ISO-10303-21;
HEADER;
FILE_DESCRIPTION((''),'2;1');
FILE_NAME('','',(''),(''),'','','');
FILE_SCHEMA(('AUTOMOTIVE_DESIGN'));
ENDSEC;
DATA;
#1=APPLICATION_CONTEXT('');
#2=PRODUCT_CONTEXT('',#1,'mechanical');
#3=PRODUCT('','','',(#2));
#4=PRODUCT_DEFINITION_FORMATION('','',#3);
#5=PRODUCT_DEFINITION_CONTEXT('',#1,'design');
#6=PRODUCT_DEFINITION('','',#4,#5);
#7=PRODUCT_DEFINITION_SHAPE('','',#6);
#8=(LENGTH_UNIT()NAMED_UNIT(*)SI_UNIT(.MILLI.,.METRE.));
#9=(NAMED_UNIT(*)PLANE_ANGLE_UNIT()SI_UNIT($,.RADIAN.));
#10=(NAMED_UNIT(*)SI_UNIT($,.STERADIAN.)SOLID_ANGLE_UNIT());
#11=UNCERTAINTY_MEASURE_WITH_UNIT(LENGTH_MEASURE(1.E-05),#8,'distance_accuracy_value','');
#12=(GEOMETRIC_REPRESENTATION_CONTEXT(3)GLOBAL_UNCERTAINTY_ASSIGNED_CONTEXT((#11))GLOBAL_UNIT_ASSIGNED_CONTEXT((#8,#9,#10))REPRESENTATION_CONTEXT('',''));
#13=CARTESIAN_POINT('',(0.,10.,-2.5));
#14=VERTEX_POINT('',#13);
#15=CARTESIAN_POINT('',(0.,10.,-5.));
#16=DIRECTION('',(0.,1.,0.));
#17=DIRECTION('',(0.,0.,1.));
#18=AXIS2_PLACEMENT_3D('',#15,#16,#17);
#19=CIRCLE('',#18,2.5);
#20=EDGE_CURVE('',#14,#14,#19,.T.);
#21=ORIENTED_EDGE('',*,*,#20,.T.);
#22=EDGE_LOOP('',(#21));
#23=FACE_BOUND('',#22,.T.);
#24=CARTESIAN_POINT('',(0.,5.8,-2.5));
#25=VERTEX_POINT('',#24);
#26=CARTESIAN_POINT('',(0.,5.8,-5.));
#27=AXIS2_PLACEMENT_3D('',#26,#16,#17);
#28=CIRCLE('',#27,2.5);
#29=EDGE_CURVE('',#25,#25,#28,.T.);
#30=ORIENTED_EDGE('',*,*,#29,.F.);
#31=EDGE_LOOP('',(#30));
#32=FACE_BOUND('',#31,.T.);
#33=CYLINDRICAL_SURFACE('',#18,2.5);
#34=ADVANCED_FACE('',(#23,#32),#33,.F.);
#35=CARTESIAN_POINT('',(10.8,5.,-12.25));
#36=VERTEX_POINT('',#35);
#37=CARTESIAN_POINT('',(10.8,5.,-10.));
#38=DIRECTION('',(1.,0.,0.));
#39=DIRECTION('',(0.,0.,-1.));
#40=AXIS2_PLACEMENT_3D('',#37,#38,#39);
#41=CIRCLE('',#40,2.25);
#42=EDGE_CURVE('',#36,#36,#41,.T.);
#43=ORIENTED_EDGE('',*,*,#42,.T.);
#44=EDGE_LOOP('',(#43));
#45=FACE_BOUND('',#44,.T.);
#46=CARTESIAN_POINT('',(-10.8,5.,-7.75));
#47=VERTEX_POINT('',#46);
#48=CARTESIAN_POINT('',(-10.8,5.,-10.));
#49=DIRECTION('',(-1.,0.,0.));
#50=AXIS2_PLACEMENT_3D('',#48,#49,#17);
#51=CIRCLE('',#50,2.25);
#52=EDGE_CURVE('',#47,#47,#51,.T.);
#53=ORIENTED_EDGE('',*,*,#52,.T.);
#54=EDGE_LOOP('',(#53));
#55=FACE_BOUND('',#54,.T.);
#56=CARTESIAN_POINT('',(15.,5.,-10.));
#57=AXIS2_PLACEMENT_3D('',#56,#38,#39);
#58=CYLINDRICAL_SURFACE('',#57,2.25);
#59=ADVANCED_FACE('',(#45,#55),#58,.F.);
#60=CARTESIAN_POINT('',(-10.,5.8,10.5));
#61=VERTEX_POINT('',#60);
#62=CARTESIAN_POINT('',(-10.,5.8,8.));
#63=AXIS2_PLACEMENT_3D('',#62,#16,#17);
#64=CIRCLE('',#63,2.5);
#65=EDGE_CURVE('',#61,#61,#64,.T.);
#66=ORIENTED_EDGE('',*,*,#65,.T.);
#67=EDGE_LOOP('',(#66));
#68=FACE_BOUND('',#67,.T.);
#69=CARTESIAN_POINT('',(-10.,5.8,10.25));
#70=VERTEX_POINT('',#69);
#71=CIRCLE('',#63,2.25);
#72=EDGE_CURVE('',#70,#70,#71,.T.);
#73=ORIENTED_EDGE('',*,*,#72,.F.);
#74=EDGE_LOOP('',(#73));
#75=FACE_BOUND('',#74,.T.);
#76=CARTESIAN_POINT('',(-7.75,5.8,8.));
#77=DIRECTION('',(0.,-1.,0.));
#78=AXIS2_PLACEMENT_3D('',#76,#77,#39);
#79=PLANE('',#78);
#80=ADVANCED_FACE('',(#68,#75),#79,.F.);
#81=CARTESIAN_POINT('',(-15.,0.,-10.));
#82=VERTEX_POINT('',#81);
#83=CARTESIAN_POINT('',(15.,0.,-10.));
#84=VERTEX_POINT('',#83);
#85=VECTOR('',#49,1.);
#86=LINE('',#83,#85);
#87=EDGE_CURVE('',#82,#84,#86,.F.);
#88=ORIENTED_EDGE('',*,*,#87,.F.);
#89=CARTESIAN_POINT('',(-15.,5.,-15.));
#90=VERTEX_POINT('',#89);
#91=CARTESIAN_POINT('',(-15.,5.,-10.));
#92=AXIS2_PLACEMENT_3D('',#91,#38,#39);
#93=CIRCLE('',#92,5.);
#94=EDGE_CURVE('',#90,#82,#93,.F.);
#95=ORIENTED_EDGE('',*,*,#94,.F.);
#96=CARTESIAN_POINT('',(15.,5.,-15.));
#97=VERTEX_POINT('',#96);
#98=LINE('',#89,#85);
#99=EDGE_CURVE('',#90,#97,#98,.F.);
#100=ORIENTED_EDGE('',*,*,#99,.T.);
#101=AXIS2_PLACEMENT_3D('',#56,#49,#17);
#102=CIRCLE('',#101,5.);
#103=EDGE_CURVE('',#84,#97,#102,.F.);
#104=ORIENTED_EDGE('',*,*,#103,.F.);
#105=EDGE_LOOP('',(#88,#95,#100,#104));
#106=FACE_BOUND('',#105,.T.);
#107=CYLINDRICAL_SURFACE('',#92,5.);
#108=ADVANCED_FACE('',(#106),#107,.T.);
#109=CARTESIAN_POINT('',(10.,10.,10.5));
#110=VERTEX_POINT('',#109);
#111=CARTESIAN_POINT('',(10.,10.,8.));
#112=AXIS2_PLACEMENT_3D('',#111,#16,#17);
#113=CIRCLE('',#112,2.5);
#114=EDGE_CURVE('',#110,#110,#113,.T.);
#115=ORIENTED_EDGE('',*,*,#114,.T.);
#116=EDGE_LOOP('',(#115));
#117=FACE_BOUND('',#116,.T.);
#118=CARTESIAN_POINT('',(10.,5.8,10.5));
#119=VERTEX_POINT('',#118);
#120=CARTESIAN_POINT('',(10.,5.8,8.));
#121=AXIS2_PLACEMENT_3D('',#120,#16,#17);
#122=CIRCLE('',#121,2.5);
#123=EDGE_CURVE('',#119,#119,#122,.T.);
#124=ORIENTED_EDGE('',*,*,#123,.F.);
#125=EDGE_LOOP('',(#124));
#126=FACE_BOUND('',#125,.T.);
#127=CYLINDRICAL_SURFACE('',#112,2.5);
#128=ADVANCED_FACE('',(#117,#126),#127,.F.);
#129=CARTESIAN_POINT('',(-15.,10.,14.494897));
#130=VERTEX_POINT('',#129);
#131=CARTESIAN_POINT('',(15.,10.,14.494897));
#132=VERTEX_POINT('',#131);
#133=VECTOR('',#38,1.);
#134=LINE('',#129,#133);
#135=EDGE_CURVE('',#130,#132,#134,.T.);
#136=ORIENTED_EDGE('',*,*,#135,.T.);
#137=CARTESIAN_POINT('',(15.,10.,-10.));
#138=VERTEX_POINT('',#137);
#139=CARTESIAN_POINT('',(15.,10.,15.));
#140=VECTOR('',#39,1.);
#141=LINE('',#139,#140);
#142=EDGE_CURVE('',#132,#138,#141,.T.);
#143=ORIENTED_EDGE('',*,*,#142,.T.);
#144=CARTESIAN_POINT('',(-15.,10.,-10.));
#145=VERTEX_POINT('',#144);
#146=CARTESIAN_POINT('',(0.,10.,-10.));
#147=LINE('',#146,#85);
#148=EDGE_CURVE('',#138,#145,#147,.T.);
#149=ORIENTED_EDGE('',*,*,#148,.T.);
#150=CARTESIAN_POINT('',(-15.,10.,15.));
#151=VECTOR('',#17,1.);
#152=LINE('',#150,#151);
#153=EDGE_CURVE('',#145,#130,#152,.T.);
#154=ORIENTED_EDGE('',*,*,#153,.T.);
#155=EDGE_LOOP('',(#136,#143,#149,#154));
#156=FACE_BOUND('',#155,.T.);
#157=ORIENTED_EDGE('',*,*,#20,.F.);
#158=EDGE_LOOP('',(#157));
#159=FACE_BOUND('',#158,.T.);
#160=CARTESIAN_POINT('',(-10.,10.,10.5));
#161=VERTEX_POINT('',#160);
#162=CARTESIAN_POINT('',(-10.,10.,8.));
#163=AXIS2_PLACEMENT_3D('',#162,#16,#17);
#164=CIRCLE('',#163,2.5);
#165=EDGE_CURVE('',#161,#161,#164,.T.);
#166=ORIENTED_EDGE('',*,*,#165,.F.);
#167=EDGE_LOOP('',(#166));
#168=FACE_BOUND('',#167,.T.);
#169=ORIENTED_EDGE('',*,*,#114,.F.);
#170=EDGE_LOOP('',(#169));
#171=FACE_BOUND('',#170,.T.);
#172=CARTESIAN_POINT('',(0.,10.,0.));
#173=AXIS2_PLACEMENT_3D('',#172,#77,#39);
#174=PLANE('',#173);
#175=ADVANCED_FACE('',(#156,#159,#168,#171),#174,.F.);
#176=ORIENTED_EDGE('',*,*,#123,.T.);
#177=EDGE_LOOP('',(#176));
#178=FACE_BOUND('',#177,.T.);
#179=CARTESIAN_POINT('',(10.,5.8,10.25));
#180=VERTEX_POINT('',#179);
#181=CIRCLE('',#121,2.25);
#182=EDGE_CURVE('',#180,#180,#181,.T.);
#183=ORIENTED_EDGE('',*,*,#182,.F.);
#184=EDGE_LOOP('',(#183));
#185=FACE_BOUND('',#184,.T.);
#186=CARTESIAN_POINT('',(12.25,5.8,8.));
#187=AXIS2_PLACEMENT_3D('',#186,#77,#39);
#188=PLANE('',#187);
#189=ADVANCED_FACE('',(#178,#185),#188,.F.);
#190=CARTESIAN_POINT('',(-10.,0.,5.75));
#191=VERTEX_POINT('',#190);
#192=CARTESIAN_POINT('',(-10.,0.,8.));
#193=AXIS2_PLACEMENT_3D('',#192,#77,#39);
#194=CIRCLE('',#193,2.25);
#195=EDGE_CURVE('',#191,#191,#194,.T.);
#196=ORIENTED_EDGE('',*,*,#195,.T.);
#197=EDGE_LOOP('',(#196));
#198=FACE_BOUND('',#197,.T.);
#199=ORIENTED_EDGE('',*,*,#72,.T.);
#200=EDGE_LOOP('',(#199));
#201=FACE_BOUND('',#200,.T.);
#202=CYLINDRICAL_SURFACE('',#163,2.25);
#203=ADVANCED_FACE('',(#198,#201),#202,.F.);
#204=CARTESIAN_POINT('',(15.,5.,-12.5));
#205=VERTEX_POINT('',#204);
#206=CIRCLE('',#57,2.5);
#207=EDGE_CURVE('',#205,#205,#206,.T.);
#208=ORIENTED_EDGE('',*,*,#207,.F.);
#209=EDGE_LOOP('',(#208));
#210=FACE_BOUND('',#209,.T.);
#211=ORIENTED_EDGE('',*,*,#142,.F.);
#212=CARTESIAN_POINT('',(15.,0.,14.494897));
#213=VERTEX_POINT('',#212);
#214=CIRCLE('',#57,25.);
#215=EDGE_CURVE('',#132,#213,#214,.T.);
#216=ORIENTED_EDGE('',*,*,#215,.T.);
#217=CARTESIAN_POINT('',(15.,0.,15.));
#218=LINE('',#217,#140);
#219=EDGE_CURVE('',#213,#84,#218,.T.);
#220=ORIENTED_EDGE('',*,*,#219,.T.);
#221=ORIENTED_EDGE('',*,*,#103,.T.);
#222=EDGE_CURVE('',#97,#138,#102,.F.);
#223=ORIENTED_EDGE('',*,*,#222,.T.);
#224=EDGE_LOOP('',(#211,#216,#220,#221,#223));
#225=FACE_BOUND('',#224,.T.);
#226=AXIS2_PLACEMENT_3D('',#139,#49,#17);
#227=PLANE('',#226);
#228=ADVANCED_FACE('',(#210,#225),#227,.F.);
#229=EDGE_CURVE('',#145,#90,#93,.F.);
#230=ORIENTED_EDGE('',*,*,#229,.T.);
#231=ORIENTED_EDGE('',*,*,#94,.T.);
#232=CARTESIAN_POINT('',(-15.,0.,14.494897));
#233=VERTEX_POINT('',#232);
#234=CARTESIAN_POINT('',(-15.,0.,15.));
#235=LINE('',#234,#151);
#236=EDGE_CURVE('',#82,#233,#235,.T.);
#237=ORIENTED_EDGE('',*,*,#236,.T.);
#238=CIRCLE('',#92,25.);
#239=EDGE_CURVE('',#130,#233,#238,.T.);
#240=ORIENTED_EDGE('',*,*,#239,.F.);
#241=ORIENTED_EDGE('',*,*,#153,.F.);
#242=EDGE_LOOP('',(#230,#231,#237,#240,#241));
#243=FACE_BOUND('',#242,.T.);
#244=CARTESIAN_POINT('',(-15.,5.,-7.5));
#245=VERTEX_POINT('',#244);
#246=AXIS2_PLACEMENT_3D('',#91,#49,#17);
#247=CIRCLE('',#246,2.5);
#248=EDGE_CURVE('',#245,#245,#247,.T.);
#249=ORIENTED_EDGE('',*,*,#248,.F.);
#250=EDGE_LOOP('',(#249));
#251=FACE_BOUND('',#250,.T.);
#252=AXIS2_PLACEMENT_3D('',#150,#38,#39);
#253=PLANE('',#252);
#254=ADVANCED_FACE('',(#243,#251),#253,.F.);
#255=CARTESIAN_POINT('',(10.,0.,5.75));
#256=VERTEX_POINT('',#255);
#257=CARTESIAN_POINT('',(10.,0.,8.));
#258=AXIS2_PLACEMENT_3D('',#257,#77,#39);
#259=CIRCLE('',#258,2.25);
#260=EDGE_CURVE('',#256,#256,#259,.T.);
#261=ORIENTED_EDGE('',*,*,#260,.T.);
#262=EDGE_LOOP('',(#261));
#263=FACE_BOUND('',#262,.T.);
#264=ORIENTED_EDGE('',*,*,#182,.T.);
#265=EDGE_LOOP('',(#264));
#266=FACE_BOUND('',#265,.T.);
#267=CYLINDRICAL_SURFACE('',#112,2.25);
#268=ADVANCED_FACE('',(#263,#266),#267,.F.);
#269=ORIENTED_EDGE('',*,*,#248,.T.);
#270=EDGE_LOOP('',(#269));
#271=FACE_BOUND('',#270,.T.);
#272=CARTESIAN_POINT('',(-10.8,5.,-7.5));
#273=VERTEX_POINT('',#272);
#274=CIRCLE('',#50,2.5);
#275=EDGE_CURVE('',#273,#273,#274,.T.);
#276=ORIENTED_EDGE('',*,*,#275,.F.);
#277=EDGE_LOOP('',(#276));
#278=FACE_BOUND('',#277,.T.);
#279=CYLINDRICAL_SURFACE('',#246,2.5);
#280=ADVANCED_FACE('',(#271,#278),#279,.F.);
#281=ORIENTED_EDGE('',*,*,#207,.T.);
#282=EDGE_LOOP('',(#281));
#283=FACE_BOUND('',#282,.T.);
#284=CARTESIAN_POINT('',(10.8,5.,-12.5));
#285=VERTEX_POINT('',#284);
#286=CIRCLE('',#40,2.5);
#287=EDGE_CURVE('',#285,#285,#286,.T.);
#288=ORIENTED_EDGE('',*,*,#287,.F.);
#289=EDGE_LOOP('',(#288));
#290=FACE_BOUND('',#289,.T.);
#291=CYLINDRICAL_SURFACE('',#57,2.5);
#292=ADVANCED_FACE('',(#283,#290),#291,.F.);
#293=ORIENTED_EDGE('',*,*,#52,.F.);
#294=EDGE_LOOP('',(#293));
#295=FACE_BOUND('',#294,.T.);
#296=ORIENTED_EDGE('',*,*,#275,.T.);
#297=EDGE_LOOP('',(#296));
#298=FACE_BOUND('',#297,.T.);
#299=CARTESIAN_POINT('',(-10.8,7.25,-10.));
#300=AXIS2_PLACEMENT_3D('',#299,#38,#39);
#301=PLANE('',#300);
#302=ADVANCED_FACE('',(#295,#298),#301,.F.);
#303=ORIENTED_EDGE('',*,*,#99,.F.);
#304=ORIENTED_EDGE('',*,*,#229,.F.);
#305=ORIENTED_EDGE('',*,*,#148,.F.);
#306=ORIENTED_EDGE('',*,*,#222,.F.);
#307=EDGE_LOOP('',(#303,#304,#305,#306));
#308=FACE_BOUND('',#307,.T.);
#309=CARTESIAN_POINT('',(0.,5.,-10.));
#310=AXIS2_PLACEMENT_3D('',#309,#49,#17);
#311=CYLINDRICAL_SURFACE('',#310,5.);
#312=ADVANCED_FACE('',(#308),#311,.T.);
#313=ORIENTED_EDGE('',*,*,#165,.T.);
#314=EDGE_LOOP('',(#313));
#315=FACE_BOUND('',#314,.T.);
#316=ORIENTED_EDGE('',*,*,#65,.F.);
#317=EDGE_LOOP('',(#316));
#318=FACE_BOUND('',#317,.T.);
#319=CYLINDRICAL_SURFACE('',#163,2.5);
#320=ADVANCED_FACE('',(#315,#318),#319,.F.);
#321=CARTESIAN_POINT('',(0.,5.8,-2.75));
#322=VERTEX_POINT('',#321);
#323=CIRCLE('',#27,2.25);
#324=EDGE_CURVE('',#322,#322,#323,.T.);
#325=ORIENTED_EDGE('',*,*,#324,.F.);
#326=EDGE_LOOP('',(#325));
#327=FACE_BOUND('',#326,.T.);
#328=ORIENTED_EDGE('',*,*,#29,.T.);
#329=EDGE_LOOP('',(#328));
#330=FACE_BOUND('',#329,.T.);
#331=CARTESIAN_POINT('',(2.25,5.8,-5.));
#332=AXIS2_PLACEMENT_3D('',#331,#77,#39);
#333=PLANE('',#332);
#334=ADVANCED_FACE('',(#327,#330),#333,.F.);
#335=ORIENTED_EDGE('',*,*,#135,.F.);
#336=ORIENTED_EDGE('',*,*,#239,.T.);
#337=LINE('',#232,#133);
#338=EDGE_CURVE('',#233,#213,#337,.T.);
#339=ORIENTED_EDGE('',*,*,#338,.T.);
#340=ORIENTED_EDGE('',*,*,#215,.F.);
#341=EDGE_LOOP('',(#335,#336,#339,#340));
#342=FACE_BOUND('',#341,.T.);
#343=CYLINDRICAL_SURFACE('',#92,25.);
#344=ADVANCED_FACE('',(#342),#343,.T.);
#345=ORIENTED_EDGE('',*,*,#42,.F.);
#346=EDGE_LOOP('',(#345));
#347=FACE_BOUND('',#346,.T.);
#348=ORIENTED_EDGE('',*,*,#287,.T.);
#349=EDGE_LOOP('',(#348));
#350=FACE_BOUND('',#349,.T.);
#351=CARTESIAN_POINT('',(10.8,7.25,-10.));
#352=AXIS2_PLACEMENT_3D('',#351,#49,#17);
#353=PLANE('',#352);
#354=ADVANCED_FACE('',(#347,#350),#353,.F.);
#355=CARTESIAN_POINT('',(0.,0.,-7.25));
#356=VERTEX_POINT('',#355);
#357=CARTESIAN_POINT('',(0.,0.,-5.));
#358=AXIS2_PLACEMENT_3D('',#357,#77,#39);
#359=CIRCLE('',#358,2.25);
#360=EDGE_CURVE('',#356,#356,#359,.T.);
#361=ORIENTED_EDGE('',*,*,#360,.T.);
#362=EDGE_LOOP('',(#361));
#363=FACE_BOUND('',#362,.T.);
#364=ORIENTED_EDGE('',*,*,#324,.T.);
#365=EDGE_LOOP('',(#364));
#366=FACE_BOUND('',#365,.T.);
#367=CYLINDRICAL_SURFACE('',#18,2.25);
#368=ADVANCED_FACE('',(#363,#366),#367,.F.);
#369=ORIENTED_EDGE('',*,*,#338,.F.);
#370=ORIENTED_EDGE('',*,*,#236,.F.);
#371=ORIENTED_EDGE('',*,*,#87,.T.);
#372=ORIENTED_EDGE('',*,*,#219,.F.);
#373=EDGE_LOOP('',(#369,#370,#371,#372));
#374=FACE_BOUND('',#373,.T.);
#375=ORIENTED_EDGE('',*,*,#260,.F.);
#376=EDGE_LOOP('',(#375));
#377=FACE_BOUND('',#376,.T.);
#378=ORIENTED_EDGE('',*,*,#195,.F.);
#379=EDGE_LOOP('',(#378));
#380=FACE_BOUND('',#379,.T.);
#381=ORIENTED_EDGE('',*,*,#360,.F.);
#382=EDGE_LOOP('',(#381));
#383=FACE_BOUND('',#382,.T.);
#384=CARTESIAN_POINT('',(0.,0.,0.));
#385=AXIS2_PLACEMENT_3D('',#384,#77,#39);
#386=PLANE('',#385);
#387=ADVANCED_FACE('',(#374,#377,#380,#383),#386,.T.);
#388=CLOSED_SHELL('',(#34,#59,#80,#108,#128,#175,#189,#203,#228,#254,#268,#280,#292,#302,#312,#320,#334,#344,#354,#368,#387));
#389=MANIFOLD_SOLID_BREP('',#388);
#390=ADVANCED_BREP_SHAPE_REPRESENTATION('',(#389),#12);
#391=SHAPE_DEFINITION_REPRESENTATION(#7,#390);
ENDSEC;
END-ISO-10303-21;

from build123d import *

# Parameters (mm, degrees)
SKETCH1_W                               = 30
SKETCH1_H                               = 30
BOSS_EXTRUDE1_DEPTH                     = 10
FILLET1_R                               = 5
CBORE_FOR_M5_HEX_HEAD_BOLT2_D           = 4.5
CBORE_FOR_M5_HEX_HEAD_BOLT2_CBORE_D     = 5
CBORE_FOR_M5_HEX_HEAD_BOLT2_CBORE_DEPTH = 4.2
CBORE_FOR_M5_HEX_HEAD_BOLT1_D           = 4.5
CBORE_FOR_M5_HEX_HEAD_BOLT1_CBORE_D     = 5
CBORE_FOR_M5_HEX_HEAD_BOLT1_CBORE_DEPTH = 4.2
CUT_EXTRUDE1_DEPTH                      = 36


with BuildPart() as part:
    # Sketch1 → Boss-Extrude1 (new body)
    with BuildSketch(Plane(origin=(0, 0, 0), x_dir=(1, 0, 0), z_dir=(0, 1, 0))):
        Rectangle(SKETCH1_W, SKETCH1_H)
    extrude(amount=BOSS_EXTRUDE1_DEPTH)

    # Fillet1
    fillet1_edges = [part.edges().sort_by_distance(p)[0] for p in [
        (0, 0, -15),
        (0, 10, -15),
    ]]
    fillet(fillet1_edges, radius=FILLET1_R - 0.0001)  # a hair under: the kernel refuses the full size

    # CBORE for M5 Hex Head Bolt2 (through all)
    with Locations(Plane(origin=(15, 0, 0), x_dir=(0, 0, -1), z_dir=(1, 0, 0))):
        with Locations((10, 5)):
            cbore_for_m5_hex_head_bolt2 = CounterBoreHole(CBORE_FOR_M5_HEX_HEAD_BOLT2_D / 2, CBORE_FOR_M5_HEX_HEAD_BOLT2_CBORE_D / 2, CBORE_FOR_M5_HEX_HEAD_BOLT2_CBORE_DEPTH)

    # CBORE for M5 Hex Head Bolt1 (through all)
    with Locations(Plane(origin=(0, 10, 0), x_dir=(1, 0, 0), z_dir=(0, 1, 0))):
        with Locations((-10, -8), (10, -8), (0, 5)):
            CounterBoreHole(CBORE_FOR_M5_HEX_HEAD_BOLT1_D / 2, CBORE_FOR_M5_HEX_HEAD_BOLT1_CBORE_D / 2, CBORE_FOR_M5_HEX_HEAD_BOLT1_CBORE_DEPTH)

    # Sketch9 → Cut-Extrude1 (cut, through all)
    with BuildSketch(Plane(origin=(15, 0, 0), x_dir=(0, 0, -1), z_dir=(1, 0, 0))):
        with BuildLine():
            Line((-15, 10), (-15, 5))
            ThreePointArc((-15, 5), (-14.873403825, 7.51272405), (-14.494897428, 10))
            Line((-14.494897428, 10), (-15, 10))
        make_face()
        with BuildLine():
            Line((-15, 0), (-14.494897428, 0))
            ThreePointArc((-14.494897428, 0), (-14.873403825, 2.48727595), (-15, 5))
            Line((-15, 5), (-15, 0))
        make_face()
    extrude(amount=-CUT_EXTRUDE1_DEPTH, mode=Mode.SUBTRACT)

    # Mirror1: CBORE for M5 Hex Head Bolt2 across plane
    add(cbore_for_m5_hex_head_bolt2.mirror(Plane(origin=(0, 0, 0), x_dir=(0, 0, 1), z_dir=(1, 0, 0))), mode=Mode.SUBTRACT)


solid = part.part
